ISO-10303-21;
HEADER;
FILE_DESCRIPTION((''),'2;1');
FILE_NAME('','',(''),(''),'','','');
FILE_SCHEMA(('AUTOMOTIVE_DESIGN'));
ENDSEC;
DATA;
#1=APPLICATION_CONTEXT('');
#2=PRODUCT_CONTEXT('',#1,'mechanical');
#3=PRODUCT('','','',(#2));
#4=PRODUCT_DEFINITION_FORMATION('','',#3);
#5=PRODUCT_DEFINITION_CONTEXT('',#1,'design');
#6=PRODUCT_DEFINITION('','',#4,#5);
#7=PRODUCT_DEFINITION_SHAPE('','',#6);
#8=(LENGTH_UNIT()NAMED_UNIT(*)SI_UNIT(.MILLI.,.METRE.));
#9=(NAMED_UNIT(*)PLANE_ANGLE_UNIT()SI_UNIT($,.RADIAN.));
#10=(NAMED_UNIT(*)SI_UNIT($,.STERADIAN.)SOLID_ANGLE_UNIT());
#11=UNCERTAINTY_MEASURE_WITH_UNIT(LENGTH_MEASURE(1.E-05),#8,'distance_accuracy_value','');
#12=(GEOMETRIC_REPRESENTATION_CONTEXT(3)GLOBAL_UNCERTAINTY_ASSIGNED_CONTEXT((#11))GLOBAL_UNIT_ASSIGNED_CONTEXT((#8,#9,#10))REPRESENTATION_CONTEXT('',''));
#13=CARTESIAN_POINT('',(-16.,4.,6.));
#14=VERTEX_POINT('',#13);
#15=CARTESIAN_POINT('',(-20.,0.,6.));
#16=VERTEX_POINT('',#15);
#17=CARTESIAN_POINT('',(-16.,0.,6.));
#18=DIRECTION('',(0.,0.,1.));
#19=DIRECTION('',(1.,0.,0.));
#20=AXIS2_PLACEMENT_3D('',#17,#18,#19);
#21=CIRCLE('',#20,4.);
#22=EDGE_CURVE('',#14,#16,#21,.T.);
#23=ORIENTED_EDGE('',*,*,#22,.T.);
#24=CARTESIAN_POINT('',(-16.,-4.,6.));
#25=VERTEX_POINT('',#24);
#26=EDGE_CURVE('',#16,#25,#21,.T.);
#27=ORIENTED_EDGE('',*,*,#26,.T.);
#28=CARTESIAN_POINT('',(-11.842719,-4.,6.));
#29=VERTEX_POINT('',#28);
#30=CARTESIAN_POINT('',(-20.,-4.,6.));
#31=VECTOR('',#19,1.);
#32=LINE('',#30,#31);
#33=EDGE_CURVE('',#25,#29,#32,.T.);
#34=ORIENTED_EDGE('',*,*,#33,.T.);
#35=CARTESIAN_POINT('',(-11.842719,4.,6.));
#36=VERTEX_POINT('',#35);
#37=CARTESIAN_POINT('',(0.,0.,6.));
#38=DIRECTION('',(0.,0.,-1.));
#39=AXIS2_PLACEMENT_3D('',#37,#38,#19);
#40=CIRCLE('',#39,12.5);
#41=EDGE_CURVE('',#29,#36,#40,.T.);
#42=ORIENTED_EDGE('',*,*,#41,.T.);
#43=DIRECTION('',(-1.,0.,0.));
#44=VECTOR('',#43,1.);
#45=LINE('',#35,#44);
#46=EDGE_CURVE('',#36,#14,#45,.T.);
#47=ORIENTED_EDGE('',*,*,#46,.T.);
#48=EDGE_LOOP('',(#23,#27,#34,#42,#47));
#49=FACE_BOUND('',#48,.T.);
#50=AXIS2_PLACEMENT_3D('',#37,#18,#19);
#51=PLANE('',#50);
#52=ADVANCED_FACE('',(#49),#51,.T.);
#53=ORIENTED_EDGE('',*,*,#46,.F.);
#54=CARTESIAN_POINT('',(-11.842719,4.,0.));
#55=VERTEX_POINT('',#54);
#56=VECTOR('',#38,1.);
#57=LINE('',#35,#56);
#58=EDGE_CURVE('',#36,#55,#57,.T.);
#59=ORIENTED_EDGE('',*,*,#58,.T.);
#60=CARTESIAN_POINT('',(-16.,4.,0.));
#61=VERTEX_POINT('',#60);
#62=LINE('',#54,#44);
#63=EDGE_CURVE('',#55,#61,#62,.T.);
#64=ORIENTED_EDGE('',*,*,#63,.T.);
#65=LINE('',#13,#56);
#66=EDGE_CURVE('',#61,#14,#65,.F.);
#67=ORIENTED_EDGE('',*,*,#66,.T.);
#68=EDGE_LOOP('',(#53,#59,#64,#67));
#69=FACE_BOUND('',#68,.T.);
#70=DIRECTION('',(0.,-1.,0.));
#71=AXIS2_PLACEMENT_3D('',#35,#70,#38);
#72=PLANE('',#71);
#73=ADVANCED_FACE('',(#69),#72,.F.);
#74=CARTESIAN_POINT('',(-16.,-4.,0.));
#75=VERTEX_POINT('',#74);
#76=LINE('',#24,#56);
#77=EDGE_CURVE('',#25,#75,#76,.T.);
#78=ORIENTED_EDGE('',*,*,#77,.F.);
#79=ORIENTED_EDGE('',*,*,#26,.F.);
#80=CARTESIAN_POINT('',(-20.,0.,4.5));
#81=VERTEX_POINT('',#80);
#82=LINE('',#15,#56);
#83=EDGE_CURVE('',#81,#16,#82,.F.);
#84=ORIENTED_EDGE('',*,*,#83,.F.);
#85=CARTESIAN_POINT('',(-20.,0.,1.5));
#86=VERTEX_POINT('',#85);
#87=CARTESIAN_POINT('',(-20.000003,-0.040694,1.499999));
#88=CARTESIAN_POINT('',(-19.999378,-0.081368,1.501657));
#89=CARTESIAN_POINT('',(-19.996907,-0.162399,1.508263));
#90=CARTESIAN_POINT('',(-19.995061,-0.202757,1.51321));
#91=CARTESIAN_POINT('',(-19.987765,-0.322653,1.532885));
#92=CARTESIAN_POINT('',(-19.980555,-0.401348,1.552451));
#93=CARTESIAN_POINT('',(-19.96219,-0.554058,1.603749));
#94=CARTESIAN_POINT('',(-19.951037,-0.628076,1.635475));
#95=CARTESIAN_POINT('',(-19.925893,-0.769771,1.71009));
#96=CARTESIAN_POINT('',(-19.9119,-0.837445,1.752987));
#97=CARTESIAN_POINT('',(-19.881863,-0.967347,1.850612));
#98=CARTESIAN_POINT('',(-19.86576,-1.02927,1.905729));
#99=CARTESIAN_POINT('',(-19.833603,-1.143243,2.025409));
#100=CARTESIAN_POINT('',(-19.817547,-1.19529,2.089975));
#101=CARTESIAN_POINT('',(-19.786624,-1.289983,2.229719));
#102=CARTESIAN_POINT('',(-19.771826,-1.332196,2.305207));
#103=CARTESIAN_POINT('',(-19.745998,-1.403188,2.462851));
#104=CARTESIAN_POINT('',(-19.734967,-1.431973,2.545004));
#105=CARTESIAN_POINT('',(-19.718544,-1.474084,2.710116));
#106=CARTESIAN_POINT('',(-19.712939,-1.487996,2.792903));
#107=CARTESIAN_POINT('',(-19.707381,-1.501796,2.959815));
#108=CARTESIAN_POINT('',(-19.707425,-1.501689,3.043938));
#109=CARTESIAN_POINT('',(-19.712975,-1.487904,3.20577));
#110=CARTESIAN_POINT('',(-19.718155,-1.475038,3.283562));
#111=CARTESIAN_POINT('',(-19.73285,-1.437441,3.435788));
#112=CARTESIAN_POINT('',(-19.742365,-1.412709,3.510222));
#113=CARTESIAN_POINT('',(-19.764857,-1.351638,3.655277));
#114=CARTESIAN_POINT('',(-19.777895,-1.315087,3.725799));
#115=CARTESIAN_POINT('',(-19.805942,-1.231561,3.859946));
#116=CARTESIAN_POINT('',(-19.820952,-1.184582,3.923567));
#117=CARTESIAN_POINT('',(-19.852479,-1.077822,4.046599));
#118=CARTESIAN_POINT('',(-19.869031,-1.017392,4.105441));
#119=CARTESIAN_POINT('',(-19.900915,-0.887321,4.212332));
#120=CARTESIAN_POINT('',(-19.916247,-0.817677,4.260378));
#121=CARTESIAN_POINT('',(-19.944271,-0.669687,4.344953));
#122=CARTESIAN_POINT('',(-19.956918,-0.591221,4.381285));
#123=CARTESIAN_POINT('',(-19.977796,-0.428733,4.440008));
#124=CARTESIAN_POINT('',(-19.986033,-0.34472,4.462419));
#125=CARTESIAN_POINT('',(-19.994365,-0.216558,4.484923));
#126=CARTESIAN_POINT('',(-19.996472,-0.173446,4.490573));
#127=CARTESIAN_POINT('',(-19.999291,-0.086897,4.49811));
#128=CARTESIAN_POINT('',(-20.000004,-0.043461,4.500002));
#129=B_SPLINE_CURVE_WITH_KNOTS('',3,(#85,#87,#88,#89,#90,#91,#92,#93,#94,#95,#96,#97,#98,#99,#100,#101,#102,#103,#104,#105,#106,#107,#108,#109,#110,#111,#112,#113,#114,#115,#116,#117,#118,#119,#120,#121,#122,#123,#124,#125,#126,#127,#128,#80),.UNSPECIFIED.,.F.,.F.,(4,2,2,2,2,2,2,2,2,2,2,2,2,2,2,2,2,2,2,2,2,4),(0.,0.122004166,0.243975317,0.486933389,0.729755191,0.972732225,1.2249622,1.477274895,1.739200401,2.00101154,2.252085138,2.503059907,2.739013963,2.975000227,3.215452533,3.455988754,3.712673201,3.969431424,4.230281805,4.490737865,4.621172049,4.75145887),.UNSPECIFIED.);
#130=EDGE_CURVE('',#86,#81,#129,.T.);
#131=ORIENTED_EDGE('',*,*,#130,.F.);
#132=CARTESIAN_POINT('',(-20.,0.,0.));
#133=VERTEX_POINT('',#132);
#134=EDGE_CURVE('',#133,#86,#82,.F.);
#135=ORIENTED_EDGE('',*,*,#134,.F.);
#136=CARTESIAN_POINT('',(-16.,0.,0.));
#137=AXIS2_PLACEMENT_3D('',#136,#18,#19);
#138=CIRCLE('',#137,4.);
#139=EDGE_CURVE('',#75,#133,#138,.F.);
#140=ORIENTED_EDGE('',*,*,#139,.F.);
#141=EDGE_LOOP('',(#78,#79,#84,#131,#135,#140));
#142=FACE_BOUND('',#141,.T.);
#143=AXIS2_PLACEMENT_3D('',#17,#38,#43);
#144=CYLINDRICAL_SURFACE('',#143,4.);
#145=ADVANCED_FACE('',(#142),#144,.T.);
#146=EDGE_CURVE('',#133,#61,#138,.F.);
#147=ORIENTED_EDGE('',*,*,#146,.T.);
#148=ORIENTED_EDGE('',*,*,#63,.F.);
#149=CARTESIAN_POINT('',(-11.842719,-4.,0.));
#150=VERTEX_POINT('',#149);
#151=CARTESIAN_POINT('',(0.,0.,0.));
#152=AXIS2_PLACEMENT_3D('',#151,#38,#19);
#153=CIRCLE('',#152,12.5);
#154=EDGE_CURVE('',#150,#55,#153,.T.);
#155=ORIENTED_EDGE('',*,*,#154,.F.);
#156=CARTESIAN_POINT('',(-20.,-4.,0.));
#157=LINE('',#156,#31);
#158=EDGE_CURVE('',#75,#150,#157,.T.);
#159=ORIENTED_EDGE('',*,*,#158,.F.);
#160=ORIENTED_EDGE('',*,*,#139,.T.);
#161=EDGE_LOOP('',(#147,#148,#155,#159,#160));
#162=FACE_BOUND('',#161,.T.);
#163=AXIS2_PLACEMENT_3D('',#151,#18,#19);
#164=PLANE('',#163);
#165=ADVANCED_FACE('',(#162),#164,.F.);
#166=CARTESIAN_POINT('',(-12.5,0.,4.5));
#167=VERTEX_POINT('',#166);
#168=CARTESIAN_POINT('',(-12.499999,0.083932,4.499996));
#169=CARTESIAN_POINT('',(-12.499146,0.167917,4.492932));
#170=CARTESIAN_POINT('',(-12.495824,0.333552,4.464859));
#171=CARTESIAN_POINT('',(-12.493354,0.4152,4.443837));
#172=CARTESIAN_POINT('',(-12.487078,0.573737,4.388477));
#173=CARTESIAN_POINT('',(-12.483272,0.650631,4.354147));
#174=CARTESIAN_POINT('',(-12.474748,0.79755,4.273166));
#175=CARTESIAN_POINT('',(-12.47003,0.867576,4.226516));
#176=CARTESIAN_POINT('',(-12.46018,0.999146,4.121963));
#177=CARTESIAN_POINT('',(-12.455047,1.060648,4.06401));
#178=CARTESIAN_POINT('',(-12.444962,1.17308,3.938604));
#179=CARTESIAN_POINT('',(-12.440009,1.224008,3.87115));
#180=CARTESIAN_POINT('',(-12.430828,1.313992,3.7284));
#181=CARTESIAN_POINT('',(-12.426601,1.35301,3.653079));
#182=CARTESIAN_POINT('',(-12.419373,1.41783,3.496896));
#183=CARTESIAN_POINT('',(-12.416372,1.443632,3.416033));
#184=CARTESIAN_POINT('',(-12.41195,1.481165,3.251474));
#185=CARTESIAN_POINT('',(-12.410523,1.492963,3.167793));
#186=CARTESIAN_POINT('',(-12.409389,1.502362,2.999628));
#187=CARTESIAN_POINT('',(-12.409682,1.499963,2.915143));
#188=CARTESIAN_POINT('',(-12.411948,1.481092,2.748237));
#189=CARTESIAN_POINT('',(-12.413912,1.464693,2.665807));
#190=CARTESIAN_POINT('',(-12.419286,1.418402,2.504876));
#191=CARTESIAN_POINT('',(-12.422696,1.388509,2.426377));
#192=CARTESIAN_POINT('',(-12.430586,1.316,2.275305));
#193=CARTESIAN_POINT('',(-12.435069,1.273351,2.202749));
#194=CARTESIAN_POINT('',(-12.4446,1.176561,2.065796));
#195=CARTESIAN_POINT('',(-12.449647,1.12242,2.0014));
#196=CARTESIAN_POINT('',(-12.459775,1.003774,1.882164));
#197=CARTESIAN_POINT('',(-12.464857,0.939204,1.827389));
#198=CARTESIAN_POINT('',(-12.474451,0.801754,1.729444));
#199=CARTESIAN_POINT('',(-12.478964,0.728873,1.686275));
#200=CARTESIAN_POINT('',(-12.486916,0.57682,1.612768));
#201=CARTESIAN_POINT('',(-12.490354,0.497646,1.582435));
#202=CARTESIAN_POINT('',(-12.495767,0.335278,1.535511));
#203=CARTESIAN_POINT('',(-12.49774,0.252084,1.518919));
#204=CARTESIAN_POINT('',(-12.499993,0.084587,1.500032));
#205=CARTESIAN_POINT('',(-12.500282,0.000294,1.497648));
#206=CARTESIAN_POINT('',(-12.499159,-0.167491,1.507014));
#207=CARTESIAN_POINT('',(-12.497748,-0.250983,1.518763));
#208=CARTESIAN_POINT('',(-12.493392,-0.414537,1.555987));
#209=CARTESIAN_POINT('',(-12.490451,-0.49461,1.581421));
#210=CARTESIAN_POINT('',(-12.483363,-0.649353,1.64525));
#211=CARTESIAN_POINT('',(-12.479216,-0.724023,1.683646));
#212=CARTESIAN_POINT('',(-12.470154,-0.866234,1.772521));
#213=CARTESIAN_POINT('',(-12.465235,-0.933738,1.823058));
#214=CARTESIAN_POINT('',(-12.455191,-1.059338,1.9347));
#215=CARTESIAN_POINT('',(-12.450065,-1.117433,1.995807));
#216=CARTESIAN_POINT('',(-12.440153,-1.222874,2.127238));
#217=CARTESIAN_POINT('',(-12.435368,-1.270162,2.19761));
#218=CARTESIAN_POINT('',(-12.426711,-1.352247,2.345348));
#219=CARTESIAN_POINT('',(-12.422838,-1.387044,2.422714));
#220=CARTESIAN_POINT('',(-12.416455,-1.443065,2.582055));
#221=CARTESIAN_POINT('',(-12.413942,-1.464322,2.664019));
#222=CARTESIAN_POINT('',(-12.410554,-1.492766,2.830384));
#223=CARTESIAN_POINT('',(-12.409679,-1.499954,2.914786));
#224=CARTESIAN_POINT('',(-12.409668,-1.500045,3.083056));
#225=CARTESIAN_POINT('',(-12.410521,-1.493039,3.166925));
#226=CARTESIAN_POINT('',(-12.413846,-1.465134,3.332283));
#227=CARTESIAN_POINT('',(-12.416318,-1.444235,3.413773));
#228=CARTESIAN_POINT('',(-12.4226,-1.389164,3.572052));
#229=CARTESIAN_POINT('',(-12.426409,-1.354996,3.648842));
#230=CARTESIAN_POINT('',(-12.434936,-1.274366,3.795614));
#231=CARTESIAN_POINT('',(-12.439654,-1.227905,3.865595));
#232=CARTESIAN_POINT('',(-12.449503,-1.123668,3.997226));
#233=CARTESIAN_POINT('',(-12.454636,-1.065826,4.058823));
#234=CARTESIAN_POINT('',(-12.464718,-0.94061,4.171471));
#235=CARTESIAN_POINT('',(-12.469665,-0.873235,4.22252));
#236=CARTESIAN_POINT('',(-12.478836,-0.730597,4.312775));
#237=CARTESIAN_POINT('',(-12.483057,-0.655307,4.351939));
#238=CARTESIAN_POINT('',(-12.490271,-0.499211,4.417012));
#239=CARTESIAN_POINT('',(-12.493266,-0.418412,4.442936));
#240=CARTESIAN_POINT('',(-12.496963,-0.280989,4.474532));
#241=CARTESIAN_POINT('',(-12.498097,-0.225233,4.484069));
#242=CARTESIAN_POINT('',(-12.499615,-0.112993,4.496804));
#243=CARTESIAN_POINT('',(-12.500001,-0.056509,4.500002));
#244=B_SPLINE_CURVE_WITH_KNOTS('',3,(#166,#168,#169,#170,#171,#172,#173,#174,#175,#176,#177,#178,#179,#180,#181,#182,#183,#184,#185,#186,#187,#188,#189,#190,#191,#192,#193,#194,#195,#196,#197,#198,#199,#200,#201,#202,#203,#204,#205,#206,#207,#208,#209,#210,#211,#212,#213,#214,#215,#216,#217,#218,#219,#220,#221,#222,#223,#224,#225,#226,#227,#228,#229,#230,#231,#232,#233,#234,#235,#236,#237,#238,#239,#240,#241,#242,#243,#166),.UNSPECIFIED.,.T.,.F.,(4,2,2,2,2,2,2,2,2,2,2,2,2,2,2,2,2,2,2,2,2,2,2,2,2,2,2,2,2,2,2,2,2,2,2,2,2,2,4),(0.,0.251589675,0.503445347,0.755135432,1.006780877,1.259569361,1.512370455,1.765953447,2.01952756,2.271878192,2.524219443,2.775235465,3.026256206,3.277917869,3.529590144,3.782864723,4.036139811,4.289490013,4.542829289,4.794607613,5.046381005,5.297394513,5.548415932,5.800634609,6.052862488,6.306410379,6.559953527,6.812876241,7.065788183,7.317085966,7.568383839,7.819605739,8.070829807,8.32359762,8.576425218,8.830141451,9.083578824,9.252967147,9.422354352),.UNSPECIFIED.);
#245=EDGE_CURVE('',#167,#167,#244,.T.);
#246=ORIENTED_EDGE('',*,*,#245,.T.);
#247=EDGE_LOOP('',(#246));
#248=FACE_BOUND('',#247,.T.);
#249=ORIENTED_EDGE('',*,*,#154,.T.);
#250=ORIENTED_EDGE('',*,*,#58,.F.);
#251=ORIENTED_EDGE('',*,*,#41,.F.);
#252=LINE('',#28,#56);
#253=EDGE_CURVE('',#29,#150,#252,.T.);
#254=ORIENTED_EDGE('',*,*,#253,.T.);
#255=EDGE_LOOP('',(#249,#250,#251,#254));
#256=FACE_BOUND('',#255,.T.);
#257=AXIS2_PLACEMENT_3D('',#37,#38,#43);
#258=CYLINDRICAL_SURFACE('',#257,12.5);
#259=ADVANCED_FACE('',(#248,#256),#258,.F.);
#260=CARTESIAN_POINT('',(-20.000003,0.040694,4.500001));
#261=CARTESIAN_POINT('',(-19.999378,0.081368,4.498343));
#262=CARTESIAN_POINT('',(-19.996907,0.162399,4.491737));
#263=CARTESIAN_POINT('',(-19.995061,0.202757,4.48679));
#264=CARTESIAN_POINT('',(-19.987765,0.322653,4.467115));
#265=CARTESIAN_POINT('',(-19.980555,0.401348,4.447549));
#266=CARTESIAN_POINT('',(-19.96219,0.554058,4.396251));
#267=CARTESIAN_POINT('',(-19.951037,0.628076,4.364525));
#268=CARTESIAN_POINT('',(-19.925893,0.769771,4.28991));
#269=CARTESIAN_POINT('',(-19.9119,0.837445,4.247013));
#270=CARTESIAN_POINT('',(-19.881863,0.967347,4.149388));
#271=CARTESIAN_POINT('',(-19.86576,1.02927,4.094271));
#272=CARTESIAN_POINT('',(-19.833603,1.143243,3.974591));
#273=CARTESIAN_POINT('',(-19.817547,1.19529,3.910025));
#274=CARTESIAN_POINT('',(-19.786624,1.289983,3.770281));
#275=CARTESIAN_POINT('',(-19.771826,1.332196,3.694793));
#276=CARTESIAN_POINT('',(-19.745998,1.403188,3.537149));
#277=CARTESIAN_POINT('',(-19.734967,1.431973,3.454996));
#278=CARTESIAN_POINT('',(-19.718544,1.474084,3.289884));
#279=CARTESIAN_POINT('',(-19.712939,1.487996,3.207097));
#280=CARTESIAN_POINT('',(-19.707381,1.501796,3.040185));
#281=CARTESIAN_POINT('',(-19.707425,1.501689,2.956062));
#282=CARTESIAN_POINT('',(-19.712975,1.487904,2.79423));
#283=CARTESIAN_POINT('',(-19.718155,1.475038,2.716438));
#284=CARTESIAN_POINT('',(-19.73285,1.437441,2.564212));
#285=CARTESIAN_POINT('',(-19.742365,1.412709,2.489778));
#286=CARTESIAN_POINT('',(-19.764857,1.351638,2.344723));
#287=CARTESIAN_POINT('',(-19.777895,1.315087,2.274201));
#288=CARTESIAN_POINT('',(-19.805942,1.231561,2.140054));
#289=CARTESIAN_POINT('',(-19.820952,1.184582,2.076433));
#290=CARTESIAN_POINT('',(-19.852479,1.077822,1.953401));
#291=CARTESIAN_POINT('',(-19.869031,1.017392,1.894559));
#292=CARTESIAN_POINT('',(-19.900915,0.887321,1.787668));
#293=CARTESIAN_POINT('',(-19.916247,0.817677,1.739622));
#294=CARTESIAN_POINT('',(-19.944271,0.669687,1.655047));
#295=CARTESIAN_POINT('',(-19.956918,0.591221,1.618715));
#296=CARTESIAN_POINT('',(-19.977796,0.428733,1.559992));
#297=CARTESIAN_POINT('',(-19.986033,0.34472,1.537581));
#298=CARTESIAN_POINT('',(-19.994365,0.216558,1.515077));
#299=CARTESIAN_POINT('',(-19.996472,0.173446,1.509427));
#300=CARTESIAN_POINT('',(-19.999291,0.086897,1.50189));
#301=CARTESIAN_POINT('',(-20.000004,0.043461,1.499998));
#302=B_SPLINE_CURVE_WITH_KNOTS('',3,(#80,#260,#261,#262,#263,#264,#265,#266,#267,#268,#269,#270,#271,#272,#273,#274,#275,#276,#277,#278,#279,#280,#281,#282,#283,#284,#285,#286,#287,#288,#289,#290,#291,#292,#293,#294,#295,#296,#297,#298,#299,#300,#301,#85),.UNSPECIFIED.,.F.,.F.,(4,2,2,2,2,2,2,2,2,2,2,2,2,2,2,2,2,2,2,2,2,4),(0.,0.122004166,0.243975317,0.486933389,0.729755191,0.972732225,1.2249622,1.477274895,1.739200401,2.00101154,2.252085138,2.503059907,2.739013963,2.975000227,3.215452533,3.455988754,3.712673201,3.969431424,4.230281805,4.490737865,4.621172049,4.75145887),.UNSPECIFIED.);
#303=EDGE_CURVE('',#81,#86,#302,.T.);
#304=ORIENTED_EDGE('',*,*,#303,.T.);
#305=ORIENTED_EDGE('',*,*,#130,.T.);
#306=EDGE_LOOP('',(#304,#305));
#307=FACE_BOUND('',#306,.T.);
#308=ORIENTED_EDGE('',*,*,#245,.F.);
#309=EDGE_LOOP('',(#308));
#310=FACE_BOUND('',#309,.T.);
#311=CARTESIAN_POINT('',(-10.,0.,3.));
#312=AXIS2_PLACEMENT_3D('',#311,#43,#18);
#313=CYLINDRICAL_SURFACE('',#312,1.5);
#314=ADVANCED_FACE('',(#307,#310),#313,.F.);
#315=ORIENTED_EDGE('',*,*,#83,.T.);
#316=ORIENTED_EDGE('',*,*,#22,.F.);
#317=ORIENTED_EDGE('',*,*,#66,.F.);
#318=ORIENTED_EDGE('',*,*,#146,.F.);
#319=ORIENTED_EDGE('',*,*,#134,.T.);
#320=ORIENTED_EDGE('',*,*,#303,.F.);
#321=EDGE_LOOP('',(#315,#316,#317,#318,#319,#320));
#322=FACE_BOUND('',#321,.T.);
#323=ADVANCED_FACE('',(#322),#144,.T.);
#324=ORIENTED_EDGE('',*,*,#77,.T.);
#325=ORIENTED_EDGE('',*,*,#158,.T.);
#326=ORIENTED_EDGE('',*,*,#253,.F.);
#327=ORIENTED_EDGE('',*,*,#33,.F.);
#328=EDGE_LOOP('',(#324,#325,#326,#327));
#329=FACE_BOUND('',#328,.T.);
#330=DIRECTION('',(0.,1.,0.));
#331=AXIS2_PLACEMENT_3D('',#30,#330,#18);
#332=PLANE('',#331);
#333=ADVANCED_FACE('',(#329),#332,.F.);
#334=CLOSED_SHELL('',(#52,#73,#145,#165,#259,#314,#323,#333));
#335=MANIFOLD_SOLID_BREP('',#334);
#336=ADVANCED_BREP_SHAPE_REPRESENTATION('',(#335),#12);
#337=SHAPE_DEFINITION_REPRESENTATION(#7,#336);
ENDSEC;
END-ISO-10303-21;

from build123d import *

# Parameters (mm, degrees)
BOSS_EXTRUDE1_DEPTH = 6
SKETCH2_R           = 1.5
CUT_EXTRUDE1_DEPTH  = 10
FILLET1_DEPTH       = 6


with BuildPart() as part:
    # Sketch1 → Boss-Extrude1 (new body)
    with BuildSketch(Plane.XY):
        with BuildLine():
            Line((-11.842719282, 4), (-20, 4))
            Line((-20, 4), (-20, -4))
            Line((-20, -4), (-11.842719282, -4))
            ThreePointArc((-11.842719282, -4), (-12.5, 0), (-11.842719282, 4))
        make_face()
    extrude(amount=BOSS_EXTRUDE1_DEPTH)

    # Sketch2 → Cut-Extrude1 (cut)
    with BuildSketch(Plane.ZY.offset(20)):
        with Locations((3, 0)):
            Circle(SKETCH2_R)
    extrude(amount=-CUT_EXTRUDE1_DEPTH, mode=Mode.SUBTRACT)

    # Fillet1: read off the stored shape, not the designer's step
    # Fillet1 outline → Fillet1 (cut)
    with BuildSketch(Plane.XY):
        with BuildLine():
            Line((-20, -4), (-16, -4))
            ThreePointArc((-16, -4), (-18.828427125, -2.828427125), (-20, 0))
            Line((-20, 0), (-20, -4))
        make_face()
        with BuildLine():
            Line((-20, 4), (-20, 0))
            ThreePointArc((-20, 0), (-18.828427125, 2.828427125), (-16, 4))
            Line((-16, 4), (-20, 4))
        make_face()
    extrude(amount=FILLET1_DEPTH, mode=Mode.SUBTRACT)


solid = part.part
